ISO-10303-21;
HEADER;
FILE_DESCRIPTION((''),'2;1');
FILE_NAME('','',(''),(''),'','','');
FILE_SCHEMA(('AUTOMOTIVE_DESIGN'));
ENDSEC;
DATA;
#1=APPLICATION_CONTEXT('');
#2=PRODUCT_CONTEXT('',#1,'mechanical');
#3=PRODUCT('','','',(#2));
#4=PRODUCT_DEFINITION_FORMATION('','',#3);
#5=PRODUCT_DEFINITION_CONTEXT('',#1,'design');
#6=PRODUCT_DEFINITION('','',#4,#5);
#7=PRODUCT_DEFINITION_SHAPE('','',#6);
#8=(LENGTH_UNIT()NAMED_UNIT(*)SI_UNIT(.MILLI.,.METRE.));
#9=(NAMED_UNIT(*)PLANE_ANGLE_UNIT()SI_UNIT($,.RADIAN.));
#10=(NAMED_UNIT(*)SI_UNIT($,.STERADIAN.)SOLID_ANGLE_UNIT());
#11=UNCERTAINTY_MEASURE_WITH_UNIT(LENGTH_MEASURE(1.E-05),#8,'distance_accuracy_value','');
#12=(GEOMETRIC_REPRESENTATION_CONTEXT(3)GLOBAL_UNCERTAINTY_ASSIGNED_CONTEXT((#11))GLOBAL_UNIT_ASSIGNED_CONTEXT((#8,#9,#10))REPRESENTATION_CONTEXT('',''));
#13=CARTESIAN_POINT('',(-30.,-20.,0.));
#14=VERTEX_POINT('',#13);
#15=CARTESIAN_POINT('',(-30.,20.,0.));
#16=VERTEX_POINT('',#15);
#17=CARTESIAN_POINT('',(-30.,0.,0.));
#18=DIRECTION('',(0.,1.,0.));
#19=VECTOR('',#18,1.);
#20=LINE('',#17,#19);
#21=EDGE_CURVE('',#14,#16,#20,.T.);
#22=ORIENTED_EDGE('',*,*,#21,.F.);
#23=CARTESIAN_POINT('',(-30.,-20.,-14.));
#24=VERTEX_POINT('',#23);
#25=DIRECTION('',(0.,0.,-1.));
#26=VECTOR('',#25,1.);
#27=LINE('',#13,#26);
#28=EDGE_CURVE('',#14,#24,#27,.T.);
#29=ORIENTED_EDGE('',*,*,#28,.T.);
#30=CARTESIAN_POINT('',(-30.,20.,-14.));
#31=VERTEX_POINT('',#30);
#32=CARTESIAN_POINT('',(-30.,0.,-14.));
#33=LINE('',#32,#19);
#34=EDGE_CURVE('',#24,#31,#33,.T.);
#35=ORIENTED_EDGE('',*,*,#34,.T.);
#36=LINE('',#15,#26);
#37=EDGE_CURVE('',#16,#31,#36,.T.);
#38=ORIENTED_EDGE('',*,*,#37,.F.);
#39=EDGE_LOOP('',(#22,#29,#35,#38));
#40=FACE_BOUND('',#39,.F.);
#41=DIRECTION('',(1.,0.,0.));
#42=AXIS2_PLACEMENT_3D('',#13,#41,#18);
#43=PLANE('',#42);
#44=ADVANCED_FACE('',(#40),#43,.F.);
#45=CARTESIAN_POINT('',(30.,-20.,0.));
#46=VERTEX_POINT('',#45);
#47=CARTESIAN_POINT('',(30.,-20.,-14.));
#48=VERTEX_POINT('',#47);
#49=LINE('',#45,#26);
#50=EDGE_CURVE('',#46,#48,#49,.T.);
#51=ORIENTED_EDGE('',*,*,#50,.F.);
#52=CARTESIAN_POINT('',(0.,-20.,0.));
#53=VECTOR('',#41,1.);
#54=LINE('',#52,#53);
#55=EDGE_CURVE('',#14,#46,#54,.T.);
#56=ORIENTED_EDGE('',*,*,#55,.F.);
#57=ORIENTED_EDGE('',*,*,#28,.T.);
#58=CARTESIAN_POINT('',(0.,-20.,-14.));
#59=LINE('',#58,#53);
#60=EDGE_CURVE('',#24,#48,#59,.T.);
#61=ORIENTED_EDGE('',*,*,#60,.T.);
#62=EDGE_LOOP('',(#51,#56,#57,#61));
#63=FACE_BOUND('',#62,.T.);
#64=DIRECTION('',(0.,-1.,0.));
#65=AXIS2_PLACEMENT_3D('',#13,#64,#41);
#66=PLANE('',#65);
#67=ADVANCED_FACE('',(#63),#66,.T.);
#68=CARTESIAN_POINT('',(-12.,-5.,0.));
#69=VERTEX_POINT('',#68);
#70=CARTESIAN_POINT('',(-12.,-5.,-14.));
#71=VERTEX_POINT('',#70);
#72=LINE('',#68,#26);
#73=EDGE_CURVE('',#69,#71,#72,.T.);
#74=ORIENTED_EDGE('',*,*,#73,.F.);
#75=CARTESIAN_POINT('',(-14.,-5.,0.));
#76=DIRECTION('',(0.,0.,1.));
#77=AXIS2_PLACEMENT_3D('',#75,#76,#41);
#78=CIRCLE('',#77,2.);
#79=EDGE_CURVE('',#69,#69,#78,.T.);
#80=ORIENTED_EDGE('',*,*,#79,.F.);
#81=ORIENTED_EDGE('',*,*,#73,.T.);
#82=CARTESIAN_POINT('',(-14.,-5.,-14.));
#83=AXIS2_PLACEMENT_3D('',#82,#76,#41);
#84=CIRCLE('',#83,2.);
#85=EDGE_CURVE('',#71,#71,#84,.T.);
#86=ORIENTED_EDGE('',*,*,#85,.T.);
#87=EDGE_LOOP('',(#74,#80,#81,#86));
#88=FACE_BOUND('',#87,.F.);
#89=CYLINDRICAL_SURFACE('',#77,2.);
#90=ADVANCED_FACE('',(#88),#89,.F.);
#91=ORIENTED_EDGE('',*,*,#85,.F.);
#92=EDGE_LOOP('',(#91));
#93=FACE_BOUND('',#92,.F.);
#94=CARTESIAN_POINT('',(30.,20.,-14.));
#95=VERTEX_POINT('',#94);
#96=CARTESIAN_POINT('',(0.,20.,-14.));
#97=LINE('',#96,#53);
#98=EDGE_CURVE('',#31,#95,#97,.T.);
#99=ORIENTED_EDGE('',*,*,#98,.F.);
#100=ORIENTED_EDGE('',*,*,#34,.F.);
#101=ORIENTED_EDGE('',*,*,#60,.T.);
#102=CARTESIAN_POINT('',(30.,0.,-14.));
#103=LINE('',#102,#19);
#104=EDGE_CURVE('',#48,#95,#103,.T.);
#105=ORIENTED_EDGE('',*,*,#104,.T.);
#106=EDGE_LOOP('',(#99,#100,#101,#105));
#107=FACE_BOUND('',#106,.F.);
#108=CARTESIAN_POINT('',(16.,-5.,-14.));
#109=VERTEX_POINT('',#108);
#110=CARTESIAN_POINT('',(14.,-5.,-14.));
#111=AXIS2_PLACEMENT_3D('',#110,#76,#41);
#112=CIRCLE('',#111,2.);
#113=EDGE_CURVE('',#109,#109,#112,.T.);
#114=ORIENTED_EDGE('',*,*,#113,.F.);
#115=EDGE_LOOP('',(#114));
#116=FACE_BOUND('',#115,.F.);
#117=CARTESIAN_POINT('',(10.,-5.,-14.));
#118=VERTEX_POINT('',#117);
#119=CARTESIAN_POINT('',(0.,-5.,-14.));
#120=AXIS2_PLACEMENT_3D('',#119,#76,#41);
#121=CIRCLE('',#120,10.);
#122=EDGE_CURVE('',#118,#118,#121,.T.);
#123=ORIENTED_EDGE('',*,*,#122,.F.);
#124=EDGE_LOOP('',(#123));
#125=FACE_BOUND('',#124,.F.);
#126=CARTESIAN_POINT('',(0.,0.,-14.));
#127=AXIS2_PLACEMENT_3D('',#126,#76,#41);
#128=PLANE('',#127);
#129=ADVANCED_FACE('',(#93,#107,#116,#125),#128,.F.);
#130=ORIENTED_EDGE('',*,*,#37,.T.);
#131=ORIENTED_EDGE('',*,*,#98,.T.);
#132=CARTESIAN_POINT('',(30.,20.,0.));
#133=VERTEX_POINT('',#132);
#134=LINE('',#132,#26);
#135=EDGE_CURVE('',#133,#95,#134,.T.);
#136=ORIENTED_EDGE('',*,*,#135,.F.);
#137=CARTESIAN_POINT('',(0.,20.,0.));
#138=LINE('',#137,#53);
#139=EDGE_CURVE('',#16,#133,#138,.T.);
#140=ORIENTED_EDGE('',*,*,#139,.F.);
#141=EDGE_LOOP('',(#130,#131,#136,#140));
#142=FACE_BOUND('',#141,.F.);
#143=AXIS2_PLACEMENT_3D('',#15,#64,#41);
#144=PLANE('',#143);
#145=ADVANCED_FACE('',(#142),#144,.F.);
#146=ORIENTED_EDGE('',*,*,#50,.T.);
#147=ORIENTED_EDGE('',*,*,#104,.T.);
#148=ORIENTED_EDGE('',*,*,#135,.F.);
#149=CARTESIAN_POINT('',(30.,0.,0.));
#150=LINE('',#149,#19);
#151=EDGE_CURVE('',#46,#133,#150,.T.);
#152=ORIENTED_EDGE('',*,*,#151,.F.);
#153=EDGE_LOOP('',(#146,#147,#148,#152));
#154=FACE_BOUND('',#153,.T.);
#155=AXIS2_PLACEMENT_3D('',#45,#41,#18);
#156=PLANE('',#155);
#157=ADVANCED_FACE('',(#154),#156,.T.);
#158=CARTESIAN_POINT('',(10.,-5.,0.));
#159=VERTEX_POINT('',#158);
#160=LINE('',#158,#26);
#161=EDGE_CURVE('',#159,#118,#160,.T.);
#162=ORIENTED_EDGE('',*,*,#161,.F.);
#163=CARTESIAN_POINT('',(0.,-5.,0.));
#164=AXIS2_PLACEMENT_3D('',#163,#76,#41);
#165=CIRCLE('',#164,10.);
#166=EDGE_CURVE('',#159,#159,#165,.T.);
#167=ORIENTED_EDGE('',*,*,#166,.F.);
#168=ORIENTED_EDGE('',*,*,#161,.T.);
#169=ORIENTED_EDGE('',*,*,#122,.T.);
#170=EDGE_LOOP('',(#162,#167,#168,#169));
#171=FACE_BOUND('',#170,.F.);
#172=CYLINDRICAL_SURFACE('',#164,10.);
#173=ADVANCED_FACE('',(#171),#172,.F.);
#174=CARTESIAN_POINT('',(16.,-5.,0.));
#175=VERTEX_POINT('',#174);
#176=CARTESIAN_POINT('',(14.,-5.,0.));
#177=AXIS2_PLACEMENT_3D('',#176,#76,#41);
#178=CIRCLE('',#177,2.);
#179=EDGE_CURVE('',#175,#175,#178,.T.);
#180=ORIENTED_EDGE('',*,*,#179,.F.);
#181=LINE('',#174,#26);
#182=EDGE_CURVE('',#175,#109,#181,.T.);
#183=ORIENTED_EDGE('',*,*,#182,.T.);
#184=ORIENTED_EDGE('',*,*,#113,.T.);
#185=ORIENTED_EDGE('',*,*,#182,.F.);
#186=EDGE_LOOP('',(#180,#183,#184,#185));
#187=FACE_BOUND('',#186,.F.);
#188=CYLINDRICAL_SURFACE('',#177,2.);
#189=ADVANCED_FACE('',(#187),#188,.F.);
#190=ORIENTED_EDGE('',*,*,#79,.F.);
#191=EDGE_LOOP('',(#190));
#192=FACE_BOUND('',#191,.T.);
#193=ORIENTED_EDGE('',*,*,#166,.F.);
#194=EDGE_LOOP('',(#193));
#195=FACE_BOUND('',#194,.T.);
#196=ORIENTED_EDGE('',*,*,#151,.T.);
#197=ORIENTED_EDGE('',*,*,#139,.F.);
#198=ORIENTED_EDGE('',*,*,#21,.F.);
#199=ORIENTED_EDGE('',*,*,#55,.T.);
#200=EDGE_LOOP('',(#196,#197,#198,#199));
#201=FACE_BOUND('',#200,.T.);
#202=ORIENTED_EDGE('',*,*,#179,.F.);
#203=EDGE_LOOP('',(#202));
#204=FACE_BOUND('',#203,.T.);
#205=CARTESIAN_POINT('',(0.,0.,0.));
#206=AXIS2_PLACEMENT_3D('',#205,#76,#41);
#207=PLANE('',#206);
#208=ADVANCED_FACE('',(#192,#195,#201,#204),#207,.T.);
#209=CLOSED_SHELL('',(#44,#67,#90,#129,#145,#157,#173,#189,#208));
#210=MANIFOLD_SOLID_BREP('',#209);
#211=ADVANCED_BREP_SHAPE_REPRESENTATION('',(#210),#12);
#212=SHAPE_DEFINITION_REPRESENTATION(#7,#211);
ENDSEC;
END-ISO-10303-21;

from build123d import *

# Parameters (mm, degrees)
F0_W     = 60
F0_H     = 40
F1_DEPTH = 14
F2_R     = 10
F2_R_2   = 2
F4_DEPTH = 14


# Not quite as in the source:
# - the program builds the solid bodies; features that only make, move or delete a surface that nothing else refers to are left out


with BuildPart() as f1:
    # F0 (on Top) → F1 (new body)
    with BuildSketch(Plane.XY):
        Rectangle(F0_W, F0_H)
    extrude(amount=-F1_DEPTH)

    # F2 (on face) → F4 (cut, through all)
    with BuildSketch(Plane.XY):
        with Locations((0, -5)):
            Circle(F2_R)
        with Locations((-14, -5)):
            Circle(F2_R_2)
        with Locations((14, -5)):
            Circle(F2_R_2)
    extrude(amount=-F4_DEPTH, mode=Mode.SUBTRACT)


solid = f1.part
